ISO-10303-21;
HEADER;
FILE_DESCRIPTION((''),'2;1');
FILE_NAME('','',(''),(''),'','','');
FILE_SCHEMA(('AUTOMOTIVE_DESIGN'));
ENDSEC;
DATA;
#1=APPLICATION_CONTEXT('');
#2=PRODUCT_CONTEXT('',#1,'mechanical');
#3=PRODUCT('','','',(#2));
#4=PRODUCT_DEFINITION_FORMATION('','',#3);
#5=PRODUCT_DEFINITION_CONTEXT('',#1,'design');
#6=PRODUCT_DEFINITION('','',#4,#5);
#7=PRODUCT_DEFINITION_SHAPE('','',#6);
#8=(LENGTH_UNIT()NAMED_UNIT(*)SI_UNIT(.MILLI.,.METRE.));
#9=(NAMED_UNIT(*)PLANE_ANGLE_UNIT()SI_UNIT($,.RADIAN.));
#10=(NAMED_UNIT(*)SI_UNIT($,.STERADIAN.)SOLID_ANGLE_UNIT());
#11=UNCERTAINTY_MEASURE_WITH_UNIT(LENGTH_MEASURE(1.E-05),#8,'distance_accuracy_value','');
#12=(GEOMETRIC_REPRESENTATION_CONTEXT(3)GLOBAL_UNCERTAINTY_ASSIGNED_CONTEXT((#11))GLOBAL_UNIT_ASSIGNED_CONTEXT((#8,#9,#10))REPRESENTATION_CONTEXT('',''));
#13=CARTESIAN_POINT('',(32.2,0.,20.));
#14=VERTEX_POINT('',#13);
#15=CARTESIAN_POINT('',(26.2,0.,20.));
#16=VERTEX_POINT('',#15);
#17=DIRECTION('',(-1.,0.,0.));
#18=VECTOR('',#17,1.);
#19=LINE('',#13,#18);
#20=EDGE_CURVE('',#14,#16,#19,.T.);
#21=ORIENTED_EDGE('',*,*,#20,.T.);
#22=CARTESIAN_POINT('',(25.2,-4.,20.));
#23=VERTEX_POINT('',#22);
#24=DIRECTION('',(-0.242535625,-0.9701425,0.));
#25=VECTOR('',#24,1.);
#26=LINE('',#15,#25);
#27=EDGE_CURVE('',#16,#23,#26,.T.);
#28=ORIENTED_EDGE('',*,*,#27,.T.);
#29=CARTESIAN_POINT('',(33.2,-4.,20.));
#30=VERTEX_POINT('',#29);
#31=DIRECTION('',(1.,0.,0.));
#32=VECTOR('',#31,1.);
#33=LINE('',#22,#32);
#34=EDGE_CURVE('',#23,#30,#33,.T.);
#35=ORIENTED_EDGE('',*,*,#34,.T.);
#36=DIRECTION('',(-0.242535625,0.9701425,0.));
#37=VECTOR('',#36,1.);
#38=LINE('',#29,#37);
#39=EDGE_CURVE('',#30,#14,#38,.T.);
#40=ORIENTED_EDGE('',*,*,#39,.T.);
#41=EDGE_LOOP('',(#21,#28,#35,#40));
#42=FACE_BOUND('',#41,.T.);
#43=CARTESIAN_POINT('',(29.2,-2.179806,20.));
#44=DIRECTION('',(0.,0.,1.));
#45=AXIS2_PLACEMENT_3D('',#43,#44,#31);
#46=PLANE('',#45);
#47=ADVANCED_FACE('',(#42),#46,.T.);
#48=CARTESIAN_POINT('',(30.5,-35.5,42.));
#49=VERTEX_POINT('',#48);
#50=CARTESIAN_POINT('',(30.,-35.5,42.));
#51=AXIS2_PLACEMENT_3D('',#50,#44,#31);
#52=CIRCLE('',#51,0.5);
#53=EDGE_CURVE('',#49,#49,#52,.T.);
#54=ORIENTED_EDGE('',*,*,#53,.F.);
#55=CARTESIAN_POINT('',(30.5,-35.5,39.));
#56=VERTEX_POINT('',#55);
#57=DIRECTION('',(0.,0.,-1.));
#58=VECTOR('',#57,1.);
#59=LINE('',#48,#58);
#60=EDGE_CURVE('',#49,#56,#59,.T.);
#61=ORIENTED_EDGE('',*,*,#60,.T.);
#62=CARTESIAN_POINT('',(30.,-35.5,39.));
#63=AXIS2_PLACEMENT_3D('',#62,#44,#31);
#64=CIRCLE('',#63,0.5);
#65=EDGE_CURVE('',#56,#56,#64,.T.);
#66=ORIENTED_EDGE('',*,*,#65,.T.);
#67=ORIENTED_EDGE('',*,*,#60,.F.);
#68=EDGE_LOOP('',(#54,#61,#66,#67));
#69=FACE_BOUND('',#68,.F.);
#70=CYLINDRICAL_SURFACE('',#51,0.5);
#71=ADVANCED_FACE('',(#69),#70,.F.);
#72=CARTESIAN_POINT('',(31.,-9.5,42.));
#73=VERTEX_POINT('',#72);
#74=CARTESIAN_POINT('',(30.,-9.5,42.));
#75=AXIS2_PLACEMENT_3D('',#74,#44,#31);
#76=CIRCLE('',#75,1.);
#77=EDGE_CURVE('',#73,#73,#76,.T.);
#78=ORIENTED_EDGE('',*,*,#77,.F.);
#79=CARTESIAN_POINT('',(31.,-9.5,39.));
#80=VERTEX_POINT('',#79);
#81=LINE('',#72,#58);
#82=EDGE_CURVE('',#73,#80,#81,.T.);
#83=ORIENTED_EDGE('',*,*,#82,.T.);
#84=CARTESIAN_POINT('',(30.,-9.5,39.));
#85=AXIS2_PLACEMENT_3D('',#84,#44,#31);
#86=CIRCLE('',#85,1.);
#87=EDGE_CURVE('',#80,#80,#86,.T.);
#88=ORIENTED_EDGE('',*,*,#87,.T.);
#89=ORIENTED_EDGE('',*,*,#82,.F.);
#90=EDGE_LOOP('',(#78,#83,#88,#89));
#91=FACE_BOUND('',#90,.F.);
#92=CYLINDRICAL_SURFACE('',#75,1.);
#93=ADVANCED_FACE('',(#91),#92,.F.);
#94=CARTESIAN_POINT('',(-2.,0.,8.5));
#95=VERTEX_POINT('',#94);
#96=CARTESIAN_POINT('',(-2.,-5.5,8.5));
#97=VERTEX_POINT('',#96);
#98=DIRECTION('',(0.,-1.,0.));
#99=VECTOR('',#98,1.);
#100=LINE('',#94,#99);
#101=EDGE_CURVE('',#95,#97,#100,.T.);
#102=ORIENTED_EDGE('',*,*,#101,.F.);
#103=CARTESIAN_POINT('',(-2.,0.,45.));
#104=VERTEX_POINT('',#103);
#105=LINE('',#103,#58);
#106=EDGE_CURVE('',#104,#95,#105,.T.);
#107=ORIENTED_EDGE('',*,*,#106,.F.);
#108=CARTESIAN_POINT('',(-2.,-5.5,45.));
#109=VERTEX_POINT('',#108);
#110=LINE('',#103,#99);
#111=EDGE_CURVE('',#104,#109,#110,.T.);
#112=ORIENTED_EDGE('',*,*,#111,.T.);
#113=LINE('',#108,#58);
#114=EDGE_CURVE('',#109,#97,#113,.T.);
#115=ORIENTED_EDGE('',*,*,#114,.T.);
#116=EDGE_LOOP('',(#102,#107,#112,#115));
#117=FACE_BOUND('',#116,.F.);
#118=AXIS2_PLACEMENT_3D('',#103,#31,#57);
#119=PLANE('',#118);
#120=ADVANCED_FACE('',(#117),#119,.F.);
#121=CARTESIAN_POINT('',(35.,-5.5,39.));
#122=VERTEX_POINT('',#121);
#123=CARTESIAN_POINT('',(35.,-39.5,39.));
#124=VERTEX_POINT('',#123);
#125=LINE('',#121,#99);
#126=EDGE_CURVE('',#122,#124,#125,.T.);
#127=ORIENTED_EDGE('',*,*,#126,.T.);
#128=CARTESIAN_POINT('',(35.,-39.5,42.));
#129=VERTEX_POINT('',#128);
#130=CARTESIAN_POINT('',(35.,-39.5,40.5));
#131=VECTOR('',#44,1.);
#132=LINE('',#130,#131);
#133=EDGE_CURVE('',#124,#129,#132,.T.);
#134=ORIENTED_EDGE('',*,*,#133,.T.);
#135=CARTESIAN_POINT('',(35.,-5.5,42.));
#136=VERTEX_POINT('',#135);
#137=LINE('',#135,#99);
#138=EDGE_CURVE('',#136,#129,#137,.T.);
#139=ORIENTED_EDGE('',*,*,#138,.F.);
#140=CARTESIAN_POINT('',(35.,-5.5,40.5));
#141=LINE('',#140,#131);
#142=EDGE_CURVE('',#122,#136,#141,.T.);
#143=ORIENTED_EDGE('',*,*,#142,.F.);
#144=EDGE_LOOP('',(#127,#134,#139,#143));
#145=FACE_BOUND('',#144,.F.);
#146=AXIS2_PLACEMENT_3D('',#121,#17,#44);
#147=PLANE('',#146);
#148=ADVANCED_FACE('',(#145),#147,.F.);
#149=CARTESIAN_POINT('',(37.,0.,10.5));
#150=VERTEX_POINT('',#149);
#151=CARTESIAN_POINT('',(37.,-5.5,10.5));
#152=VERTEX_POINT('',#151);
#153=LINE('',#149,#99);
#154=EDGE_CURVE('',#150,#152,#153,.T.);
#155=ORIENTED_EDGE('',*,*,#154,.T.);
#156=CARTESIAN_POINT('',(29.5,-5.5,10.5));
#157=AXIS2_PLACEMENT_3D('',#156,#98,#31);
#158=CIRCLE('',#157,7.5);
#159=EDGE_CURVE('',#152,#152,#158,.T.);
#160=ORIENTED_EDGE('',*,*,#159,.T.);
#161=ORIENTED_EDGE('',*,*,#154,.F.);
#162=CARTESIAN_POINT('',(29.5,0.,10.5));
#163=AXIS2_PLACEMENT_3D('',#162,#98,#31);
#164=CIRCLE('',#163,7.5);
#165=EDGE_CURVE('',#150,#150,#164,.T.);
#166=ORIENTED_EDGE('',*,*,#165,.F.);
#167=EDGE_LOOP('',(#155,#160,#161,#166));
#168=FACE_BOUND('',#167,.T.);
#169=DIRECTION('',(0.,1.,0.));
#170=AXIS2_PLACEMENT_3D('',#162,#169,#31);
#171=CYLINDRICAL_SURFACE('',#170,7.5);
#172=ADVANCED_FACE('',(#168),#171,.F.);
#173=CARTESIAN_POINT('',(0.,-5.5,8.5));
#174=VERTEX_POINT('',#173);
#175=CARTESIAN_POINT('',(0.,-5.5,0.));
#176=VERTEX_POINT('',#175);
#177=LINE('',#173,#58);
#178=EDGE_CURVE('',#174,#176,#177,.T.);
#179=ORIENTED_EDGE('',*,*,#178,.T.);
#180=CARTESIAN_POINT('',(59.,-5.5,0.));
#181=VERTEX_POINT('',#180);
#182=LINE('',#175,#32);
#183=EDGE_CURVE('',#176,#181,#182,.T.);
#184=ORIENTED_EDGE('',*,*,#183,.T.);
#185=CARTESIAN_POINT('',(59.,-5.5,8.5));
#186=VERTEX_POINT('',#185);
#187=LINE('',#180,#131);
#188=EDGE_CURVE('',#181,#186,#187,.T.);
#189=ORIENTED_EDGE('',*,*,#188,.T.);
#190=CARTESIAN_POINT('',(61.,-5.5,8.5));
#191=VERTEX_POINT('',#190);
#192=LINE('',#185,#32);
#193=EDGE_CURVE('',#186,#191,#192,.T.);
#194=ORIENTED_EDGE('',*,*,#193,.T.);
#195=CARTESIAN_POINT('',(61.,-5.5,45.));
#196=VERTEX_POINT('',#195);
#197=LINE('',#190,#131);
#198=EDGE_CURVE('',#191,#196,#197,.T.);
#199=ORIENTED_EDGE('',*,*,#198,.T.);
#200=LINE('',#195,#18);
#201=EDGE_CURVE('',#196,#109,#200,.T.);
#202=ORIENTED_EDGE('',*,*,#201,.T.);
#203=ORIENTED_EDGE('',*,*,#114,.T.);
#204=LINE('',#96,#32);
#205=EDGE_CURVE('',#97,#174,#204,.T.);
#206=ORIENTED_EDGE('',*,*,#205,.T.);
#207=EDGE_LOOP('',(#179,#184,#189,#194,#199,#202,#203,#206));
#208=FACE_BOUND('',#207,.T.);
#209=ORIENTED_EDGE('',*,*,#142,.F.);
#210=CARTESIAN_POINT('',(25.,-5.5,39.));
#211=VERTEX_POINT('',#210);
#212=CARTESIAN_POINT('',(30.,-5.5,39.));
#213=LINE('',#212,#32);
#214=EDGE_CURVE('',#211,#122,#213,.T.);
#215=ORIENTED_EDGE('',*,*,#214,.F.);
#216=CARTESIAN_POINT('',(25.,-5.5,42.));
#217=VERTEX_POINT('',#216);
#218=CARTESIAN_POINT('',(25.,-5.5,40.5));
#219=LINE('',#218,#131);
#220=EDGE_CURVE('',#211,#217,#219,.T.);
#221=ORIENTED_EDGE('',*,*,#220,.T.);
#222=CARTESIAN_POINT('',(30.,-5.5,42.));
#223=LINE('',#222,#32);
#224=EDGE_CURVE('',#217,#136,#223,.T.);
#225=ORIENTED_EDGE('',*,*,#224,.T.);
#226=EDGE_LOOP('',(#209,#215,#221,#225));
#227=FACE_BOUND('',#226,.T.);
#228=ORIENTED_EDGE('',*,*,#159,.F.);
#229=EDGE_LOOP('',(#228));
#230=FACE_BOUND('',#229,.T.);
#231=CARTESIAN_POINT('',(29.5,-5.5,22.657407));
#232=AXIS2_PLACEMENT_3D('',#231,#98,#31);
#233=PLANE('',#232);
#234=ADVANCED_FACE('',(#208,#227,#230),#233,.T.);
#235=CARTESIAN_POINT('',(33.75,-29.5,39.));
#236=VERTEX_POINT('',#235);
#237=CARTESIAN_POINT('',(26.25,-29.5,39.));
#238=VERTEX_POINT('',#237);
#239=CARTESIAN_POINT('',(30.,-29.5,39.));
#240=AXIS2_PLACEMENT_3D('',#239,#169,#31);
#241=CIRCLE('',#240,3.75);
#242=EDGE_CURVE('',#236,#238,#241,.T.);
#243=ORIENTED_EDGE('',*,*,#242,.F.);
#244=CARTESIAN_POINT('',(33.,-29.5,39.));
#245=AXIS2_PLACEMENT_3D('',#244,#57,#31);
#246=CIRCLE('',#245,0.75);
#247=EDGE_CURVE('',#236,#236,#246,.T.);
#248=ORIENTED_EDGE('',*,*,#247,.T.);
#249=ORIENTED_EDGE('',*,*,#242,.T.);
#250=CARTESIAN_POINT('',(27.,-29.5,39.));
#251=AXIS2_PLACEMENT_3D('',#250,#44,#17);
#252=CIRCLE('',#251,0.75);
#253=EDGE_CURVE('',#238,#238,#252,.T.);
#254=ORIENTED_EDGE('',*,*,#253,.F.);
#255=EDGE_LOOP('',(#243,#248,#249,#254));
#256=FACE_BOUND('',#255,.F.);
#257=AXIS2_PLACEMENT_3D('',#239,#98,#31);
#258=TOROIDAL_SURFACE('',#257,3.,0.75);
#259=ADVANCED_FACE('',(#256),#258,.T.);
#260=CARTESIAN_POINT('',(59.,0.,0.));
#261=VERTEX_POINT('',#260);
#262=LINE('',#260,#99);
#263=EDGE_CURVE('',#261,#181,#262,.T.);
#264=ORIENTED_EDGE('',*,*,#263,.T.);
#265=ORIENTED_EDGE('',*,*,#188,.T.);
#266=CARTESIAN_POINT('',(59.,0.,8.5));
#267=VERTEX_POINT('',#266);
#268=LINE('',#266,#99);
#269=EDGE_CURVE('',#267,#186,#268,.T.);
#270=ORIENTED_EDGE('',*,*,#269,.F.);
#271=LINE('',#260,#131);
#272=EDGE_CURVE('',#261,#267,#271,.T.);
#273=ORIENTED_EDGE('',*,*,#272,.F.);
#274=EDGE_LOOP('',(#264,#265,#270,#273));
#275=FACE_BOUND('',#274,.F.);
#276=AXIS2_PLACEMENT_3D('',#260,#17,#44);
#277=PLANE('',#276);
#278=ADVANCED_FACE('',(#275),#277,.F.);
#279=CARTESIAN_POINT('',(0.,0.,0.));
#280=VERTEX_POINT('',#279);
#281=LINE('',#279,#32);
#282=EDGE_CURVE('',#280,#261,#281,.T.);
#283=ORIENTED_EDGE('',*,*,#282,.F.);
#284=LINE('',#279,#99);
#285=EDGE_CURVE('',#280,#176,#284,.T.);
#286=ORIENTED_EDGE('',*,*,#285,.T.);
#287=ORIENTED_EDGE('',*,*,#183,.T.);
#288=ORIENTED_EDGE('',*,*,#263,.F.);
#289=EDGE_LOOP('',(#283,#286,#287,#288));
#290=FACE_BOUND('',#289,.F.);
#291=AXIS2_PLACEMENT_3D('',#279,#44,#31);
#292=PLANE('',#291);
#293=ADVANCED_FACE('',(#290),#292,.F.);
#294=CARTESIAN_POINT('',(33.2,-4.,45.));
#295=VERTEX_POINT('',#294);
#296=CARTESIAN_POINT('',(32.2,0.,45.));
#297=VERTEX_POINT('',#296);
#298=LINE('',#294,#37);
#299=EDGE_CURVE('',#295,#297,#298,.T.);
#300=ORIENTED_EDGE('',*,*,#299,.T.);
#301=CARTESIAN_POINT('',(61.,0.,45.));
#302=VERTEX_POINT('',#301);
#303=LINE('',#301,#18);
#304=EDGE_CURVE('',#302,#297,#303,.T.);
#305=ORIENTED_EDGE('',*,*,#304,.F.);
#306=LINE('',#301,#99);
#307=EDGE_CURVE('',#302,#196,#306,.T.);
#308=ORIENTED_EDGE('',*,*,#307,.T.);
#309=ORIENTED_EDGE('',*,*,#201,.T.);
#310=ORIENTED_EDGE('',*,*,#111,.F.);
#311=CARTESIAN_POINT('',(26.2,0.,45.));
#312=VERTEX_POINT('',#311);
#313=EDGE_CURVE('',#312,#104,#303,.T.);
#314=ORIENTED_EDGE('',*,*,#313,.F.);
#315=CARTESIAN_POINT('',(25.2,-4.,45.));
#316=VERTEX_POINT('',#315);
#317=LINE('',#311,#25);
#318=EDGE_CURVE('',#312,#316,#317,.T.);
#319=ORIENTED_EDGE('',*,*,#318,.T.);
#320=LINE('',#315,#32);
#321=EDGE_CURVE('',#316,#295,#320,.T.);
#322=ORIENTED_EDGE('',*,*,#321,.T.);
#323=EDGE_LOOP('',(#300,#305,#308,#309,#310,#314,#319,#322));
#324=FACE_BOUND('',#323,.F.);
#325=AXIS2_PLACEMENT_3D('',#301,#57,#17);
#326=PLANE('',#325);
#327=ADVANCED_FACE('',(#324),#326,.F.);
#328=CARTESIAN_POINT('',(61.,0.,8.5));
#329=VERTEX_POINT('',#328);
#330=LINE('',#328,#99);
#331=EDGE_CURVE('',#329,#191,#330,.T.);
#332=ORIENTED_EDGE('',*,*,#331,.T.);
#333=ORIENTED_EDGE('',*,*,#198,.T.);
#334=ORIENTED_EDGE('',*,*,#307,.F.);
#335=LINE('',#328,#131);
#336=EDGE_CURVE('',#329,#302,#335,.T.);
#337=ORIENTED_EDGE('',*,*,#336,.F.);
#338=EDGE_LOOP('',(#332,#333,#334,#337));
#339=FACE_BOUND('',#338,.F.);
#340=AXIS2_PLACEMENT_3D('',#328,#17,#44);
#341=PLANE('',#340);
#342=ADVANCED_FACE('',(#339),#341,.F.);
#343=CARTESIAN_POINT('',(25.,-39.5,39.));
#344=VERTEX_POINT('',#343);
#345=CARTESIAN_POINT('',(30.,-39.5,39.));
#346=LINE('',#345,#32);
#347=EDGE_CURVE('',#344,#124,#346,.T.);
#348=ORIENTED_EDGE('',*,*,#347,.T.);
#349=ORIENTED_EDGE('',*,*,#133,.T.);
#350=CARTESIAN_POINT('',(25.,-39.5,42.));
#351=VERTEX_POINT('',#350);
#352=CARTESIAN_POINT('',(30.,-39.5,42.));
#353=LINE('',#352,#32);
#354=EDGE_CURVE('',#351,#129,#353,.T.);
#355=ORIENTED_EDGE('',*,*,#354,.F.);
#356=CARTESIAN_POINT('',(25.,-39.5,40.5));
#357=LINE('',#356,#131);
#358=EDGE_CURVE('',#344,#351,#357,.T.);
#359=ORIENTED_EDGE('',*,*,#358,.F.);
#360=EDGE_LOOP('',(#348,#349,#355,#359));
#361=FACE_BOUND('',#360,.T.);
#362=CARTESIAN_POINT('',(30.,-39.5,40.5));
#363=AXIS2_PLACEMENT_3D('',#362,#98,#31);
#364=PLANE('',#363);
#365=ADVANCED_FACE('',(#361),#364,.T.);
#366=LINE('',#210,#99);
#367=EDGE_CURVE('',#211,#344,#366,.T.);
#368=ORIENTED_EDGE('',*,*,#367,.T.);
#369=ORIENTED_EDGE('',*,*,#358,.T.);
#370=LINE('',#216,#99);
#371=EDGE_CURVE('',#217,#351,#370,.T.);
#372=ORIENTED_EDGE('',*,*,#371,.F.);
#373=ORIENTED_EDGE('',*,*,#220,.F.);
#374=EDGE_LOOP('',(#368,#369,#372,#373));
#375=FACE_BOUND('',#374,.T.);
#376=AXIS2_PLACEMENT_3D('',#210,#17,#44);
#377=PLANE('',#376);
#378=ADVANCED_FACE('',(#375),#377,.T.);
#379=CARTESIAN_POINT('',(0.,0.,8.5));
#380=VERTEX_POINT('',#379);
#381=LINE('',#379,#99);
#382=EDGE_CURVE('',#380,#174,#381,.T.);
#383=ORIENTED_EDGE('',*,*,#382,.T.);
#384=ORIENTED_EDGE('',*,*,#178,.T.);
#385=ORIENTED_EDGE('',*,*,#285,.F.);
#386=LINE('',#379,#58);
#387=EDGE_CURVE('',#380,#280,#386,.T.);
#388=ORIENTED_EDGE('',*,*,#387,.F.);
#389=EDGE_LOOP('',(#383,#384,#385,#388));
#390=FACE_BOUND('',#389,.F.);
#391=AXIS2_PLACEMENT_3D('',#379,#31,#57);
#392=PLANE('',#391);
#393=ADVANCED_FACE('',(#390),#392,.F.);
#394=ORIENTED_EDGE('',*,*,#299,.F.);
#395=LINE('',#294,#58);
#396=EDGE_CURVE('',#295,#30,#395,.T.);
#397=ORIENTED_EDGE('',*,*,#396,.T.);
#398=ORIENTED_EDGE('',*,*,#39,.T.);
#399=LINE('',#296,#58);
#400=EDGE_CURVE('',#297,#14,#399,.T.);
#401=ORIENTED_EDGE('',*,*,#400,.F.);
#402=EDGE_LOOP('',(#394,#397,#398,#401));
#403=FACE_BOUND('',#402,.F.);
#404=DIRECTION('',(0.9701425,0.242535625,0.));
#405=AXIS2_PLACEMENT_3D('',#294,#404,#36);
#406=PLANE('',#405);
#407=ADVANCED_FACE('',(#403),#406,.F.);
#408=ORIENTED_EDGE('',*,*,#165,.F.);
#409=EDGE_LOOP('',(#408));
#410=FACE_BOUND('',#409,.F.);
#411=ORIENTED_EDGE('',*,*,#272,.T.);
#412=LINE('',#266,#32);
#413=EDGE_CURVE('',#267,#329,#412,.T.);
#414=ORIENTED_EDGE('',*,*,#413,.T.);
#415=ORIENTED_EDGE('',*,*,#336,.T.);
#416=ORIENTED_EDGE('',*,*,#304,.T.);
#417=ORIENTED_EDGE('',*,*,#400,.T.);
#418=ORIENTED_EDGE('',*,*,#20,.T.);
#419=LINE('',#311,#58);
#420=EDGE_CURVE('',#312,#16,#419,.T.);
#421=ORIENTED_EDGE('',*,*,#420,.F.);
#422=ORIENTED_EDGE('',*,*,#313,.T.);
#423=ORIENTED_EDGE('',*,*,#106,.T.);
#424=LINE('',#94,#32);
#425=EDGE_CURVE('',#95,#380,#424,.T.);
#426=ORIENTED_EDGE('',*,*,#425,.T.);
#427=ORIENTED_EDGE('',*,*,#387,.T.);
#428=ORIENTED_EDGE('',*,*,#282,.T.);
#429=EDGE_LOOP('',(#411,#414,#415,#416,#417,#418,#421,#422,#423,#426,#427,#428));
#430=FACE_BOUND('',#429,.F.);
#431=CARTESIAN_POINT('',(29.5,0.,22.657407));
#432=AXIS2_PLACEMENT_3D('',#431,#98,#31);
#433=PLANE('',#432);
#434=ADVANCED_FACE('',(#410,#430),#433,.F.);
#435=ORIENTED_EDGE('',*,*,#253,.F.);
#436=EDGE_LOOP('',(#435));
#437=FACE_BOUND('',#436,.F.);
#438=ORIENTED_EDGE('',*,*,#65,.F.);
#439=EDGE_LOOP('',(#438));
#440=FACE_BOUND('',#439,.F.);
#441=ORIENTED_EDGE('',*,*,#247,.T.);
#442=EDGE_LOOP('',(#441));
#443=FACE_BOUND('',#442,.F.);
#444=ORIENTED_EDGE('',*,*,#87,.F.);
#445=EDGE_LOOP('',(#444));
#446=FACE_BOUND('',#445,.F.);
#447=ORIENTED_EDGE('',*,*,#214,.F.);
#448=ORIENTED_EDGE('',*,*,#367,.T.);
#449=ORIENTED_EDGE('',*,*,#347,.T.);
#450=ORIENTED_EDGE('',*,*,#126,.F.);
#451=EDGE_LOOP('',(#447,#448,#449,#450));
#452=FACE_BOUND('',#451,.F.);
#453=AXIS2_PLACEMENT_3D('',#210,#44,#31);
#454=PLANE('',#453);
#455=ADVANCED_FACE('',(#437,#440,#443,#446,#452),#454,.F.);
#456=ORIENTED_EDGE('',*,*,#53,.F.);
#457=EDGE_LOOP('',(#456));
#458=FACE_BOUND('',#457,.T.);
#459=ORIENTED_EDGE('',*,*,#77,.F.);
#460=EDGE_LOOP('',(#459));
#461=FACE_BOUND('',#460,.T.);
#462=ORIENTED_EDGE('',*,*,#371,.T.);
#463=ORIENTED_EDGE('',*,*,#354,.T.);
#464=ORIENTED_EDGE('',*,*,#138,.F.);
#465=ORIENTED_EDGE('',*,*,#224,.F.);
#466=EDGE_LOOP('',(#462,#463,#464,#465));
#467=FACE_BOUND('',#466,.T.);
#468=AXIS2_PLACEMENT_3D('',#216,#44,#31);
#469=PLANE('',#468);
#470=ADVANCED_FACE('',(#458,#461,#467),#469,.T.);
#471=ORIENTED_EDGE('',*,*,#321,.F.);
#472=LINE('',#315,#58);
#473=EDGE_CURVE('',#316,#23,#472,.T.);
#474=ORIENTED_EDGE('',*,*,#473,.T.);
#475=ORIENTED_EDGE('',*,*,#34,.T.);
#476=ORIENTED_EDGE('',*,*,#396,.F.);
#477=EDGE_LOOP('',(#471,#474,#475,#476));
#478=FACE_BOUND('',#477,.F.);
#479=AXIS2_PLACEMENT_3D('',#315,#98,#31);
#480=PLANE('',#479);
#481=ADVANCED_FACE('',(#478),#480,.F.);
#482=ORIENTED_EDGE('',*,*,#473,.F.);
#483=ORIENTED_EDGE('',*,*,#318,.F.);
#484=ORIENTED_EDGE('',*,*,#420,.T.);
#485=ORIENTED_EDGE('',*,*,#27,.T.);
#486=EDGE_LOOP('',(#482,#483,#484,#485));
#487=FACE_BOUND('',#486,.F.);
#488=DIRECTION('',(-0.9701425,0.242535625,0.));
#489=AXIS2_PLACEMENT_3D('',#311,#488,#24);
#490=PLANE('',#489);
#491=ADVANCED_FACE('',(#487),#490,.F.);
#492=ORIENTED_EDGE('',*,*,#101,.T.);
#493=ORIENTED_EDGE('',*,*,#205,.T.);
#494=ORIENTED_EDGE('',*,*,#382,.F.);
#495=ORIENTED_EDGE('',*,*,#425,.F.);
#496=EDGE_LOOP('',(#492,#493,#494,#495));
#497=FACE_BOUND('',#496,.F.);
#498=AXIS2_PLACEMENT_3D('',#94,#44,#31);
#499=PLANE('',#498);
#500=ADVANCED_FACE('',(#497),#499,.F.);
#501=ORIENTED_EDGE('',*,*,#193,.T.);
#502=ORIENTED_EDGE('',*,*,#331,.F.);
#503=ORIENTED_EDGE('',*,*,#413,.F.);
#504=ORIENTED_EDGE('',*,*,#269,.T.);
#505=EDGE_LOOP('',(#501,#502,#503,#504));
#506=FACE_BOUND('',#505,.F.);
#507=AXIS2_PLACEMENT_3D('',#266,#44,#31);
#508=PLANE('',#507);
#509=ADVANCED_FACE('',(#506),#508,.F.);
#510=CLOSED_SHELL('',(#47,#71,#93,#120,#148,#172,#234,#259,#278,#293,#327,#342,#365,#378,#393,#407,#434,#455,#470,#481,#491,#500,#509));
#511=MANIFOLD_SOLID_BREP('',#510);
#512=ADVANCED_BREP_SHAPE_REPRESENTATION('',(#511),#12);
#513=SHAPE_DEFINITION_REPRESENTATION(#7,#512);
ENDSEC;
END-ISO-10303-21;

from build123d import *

# Parameters (mm, degrees)
F0_R      = 7.5
F1_DEPTH  = 5.5
F3_DEPTH  = 25
F4_W      = 10
F4_H      = 3
F5_DEPTH  = 34
F6_R      = 0.5
F7_DEPTH  = 6
F6_R_2    = 1
F8_DEPTH  = 25
F9_R      = 0.75
F10_ANGLE = 180


# Not quite as in the source:
# - a feature names something its author has since deleted; it is built from what else it names


with BuildPart() as f1:
    # F0 (on Front) → F1 (new body)
    with BuildSketch(Plane.XZ):
        Polygon((0, 8.5), (0, 0), (59, 0), (59, 8.5), (61, 8.5), (61, 45), (-2, 45), (-2, 8.5), align=None)
        with Locations((29.5, 10.5)):
            Circle(F0_R, mode=Mode.SUBTRACT)
    extrude(amount=F1_DEPTH)

    # F2 (on face) → F3 (cut)
    with BuildSketch(Plane.XY.offset(45)):
        Polygon((26.2, 0), (25.2, -4), (33.2, -4), (32.2, 0), align=None)
    extrude(amount=-F3_DEPTH, mode=Mode.SUBTRACT)

    # F4 (on face) → F5 (join)
    with BuildSketch(Plane.XZ.offset(5.5)):
        with Locations((30, 40.5)):
            Rectangle(F4_W, F4_H)
    extrude(amount=F5_DEPTH)

    # F6 (on face) → F7 (cut)
    with BuildSketch(Plane.XY.offset(42)):
        with Locations((30, -35.5)):
            Circle(F6_R)
    extrude(amount=-F7_DEPTH, mode=Mode.SUBTRACT)

    # F6 (on face) → F8 (cut)
    with BuildSketch(Plane.XY.offset(42)):
        with Locations((30, -9.5)):
            Circle(F6_R_2)
    extrude(amount=-F8_DEPTH, mode=Mode.SUBTRACT)

    # F9 (on face) → F10 (revolve)
    with BuildSketch(Plane(origin=(0, 0, 39), x_dir=(1, 0, 0), z_dir=(0, 0, -1))):
        with Locations((33, 29.5)):
            Circle(F9_R)
    revolve(axis=Axis((30, -12.9445128906, 39), (0, 1, 0)), revolution_arc=F10_ANGLE)


solid = f1.part
